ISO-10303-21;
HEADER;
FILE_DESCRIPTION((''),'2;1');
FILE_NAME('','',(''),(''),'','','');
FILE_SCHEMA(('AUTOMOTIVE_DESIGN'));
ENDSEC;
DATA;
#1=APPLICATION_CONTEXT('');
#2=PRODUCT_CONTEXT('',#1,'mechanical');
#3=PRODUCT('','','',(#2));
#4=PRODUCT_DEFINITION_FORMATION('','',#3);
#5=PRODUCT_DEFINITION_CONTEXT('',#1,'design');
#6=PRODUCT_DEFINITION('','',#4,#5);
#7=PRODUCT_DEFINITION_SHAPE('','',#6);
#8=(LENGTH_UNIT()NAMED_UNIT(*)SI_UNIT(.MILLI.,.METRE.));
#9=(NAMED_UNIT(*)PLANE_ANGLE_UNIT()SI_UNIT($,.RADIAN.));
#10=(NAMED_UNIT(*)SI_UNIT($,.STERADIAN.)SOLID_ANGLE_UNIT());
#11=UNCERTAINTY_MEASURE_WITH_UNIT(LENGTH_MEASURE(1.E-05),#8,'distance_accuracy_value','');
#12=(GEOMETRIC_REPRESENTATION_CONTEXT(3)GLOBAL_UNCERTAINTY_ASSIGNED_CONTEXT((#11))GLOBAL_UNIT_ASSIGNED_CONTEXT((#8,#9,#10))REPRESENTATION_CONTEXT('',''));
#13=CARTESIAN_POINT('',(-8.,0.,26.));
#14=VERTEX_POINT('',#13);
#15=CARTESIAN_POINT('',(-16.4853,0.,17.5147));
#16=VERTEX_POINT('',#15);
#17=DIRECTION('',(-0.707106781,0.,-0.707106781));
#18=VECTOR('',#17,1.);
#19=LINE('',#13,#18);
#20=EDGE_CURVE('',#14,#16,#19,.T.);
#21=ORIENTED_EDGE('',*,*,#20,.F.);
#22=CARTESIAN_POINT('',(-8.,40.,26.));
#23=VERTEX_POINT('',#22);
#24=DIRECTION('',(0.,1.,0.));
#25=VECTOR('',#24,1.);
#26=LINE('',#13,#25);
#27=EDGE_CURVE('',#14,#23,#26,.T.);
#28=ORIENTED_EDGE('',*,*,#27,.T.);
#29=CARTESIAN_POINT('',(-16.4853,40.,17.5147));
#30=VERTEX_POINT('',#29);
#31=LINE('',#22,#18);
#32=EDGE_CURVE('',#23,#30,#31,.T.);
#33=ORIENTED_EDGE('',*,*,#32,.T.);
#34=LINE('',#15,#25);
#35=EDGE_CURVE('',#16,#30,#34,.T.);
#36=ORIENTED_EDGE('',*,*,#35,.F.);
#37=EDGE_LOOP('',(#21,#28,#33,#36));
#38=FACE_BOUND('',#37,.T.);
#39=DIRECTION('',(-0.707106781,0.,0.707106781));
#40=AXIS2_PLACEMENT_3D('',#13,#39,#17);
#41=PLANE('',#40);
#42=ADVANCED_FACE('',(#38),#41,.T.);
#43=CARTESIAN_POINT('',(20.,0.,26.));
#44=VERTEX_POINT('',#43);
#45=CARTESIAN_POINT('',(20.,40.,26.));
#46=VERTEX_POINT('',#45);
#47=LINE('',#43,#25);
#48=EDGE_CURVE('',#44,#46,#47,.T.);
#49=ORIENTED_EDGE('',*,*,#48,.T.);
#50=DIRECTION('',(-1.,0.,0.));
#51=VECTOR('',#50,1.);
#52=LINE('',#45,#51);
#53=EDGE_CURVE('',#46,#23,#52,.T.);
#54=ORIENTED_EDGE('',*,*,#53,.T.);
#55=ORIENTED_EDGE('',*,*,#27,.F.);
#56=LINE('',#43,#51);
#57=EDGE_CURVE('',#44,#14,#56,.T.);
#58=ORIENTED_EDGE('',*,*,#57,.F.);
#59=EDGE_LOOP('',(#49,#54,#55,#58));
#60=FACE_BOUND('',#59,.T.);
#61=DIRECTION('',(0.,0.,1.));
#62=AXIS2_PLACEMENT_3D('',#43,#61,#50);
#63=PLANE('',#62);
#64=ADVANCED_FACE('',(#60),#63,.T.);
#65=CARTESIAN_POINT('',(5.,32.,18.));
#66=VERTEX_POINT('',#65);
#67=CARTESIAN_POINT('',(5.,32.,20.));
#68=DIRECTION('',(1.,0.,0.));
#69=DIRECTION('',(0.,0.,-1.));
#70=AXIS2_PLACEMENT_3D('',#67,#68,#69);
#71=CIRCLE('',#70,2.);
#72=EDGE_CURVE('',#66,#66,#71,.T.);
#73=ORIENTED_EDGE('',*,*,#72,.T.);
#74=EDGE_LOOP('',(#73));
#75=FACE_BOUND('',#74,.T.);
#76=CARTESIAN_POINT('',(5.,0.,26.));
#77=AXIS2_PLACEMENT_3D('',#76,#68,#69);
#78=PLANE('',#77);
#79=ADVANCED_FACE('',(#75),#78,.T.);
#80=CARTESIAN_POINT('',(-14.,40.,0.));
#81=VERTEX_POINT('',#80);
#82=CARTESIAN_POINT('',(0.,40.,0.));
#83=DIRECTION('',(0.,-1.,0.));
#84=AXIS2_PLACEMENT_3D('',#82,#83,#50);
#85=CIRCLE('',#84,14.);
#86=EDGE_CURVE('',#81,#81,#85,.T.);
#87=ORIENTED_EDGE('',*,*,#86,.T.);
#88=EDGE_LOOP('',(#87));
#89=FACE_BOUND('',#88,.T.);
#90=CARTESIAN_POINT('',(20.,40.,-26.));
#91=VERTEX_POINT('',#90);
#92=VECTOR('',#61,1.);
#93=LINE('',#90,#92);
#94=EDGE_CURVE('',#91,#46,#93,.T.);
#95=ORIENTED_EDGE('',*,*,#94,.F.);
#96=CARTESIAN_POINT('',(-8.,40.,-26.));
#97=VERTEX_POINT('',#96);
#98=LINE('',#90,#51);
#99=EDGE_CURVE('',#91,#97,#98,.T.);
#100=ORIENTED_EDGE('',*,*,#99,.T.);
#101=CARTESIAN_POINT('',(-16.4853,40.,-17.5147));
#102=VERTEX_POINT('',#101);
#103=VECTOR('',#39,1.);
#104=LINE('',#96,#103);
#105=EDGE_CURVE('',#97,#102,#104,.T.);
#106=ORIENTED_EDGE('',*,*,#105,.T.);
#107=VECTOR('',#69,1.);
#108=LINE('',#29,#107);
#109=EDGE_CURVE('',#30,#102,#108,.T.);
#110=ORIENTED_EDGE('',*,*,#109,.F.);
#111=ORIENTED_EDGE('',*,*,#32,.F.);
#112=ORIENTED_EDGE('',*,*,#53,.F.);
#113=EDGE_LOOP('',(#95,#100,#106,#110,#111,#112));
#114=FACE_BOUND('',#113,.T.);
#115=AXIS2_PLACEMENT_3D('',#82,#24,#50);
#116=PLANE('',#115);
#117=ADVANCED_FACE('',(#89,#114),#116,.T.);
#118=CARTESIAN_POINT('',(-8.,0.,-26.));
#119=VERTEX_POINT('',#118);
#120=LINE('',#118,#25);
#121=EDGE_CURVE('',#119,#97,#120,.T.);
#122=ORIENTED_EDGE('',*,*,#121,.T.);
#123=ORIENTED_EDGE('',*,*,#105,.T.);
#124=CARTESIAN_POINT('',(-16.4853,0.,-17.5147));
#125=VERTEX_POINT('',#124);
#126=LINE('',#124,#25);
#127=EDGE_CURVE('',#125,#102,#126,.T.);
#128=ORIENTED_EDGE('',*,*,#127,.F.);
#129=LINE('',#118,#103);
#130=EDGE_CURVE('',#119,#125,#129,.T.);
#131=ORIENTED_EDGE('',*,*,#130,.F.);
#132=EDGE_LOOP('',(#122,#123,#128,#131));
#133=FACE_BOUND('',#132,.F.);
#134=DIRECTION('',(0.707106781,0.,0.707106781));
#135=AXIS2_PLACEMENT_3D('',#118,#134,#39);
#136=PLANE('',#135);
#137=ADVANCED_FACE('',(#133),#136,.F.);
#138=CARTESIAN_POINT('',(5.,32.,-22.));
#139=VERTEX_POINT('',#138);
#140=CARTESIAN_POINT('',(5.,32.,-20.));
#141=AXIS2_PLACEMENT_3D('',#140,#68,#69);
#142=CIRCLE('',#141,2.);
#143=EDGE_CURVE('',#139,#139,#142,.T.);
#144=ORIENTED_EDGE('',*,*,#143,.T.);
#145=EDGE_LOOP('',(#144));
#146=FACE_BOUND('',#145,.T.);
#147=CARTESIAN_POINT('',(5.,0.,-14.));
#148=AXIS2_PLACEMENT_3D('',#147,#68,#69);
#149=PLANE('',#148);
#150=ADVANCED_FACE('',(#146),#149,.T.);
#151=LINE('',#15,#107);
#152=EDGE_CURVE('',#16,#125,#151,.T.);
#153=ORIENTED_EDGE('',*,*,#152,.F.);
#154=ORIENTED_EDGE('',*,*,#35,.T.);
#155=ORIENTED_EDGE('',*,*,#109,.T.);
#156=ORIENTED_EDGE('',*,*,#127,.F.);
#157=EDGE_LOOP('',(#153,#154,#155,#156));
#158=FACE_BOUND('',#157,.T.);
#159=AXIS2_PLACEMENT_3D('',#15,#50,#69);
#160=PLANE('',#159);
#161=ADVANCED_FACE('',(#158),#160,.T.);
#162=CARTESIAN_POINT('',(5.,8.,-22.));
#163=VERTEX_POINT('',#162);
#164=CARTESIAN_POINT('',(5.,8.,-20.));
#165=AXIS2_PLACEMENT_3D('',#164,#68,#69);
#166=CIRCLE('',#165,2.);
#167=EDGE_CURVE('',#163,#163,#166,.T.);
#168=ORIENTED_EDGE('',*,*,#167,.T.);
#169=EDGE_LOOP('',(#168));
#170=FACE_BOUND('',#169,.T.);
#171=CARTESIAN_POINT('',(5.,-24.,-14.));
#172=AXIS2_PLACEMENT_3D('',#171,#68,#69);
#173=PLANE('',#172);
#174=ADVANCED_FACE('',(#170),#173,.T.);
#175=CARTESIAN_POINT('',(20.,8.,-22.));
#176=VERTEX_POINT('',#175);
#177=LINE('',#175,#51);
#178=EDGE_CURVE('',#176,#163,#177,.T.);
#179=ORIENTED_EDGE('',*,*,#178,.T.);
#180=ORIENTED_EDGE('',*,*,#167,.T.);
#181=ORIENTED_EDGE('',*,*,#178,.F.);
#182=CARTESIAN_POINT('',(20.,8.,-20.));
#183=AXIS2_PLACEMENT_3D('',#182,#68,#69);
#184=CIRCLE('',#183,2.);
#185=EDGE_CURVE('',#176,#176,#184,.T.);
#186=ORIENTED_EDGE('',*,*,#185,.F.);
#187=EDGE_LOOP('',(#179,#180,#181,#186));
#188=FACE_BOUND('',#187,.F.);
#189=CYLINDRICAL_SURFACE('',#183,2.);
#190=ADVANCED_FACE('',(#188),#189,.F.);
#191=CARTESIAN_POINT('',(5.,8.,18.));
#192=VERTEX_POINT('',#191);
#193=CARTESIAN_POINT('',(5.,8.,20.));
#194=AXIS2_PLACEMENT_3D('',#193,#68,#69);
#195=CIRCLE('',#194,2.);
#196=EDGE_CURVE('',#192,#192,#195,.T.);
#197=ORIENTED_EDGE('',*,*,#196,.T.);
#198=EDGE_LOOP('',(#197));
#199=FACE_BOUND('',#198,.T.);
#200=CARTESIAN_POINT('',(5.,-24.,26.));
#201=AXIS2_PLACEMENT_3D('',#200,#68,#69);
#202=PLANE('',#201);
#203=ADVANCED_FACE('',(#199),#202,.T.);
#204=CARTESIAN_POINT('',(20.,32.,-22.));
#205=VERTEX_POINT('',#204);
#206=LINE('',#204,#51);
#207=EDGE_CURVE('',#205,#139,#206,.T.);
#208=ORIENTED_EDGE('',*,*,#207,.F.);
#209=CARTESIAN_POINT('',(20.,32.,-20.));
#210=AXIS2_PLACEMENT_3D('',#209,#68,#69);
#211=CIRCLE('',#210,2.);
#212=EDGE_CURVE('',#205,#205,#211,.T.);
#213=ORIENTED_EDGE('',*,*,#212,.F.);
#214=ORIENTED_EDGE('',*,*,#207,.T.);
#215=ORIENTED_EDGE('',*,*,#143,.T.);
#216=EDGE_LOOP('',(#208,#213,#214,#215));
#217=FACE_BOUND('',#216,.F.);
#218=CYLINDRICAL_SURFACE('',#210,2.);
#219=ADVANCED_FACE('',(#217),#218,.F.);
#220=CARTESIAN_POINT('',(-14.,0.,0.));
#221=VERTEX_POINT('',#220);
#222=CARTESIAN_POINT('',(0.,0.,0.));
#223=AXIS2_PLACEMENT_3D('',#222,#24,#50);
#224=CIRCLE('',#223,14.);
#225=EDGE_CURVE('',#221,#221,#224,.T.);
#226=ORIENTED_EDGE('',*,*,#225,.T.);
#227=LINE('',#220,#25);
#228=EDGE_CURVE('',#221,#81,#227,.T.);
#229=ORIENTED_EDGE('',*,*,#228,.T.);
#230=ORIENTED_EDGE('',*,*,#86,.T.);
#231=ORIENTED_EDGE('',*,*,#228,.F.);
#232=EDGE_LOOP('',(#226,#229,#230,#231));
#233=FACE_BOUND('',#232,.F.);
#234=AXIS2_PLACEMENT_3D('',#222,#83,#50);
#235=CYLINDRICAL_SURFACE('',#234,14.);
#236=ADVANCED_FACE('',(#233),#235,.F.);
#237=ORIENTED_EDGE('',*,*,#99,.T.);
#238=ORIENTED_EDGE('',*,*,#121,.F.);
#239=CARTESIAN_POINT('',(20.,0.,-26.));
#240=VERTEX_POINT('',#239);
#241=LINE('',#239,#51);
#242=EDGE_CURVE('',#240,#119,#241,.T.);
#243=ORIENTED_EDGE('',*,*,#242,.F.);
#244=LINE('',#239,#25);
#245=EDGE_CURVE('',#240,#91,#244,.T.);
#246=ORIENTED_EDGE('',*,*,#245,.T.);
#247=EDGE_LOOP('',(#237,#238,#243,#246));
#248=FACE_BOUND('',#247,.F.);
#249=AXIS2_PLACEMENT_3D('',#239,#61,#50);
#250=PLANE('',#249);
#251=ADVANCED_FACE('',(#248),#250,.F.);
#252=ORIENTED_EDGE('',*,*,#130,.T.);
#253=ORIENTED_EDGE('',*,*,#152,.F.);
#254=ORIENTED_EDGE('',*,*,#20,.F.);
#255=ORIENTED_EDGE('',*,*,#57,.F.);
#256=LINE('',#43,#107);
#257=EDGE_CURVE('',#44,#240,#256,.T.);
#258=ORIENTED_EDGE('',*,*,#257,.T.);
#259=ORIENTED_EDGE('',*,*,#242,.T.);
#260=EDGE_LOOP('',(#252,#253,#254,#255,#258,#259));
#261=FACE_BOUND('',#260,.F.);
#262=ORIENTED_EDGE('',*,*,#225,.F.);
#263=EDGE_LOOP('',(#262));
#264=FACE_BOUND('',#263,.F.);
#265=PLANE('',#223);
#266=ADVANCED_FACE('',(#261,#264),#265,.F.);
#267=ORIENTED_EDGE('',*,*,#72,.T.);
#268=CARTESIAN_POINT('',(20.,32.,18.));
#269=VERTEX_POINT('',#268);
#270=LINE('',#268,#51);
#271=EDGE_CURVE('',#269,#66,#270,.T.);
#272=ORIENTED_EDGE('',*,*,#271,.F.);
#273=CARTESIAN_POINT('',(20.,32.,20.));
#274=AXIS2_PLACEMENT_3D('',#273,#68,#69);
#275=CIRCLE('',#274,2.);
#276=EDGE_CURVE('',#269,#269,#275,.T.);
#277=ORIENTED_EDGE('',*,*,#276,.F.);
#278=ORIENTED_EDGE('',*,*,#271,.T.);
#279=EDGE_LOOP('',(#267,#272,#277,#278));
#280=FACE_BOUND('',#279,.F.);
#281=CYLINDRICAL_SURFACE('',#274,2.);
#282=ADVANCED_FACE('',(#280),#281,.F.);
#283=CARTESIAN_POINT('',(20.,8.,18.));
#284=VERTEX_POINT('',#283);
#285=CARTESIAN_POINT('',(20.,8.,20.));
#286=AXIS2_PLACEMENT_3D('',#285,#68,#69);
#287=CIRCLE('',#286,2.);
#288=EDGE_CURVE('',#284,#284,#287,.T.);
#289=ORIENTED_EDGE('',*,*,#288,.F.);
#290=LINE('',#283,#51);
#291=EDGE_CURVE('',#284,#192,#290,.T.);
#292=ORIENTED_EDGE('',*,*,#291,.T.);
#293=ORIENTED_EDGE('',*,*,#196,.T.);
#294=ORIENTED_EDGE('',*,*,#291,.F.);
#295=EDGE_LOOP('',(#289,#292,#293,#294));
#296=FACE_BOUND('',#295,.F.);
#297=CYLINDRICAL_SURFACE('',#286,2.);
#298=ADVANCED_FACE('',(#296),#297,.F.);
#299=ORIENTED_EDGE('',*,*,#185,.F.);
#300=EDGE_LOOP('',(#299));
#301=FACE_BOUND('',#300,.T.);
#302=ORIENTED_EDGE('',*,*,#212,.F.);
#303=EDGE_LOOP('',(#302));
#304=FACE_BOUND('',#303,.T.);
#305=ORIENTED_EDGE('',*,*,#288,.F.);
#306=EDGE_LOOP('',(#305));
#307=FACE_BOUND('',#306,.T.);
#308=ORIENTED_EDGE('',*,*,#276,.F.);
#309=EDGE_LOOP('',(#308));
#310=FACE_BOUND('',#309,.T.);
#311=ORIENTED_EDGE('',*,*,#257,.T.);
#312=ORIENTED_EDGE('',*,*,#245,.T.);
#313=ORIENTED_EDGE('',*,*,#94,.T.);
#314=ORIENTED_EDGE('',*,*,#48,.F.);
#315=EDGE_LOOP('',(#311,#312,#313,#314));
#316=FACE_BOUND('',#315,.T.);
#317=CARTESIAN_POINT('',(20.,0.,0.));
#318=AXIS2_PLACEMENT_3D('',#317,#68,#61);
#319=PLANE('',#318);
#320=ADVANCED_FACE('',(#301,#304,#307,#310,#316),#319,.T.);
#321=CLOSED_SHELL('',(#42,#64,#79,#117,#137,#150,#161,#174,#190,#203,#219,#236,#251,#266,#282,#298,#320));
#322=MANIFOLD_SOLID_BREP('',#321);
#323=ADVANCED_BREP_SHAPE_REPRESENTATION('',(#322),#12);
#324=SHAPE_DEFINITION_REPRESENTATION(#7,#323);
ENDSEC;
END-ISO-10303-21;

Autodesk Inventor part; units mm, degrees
ref_plane "YZ Plane" through (0, 0, 0) normal (1, 0, 0) x (0, 1, 0)
ref_plane "XZ Plane" through (0, 0, 0) normal (0, 1, 0) x (-1, 0, 0)
ref_plane "XY Plane" through (0, 0, 0) normal (0, 0, 1) x (1, 0, 0)
sketch "Sketch1" plane through (0, 0, 0) normal (0, 1, 0) x (-1, 0, 0)
  circle A0 centre (0, 0) radius 14
  line L0 (0, 0) -> (-20, 0)
  line L1 (-20, 0) -> (-20, -26)
  line L2 (-20, -26) -> (8, -26)
  line L3 (8, -26) -> (16.4853, -17.5147)
  line L4 (-20, 0) -> (-20, 26)
  line L5 (-20, 26) -> (8, 26)
  line L6 (8, 26) -> (16.4853, 17.5147)
  line L7 (16.4853, 17.5147) -> (16.4853, -17.5147)
  dimension "d0" = 28
  dimension "d1" = 20
  dimension "d2" = 26
  dimension "d3" = 28
  dimension "d4" = 12
  dimension "d5" = 135
  dimension "d6" = 28
  dimension "d7" = 26
  dimension "d8" = 12
extrude "Extrusion1" add sketch "Sketch1" along normal blind 40
sketch "Sketch2" plane through (20, 0, 26) normal (1, 0, 0) x (0, 0, -1)
  line L0 (0, 0) -> (0, 40) projected
  line L1 (0, 40) -> (0, 32)
  circle A0 centre (6, 32) radius 2
  point P0 (26, 0)
  dimension "d11" = 8
  dimension "d13" = 4
extrude "Extrusion2" cut sketch "Sketch2" against normal blind 15
pattern_linear "Rectangular Pattern1" count 2 spacing 24 along (0, -1, 0) count 2 spacing 40 along (0, 0, -1) of "Extrusion2"
properties part number "Soporte Tuerca"
